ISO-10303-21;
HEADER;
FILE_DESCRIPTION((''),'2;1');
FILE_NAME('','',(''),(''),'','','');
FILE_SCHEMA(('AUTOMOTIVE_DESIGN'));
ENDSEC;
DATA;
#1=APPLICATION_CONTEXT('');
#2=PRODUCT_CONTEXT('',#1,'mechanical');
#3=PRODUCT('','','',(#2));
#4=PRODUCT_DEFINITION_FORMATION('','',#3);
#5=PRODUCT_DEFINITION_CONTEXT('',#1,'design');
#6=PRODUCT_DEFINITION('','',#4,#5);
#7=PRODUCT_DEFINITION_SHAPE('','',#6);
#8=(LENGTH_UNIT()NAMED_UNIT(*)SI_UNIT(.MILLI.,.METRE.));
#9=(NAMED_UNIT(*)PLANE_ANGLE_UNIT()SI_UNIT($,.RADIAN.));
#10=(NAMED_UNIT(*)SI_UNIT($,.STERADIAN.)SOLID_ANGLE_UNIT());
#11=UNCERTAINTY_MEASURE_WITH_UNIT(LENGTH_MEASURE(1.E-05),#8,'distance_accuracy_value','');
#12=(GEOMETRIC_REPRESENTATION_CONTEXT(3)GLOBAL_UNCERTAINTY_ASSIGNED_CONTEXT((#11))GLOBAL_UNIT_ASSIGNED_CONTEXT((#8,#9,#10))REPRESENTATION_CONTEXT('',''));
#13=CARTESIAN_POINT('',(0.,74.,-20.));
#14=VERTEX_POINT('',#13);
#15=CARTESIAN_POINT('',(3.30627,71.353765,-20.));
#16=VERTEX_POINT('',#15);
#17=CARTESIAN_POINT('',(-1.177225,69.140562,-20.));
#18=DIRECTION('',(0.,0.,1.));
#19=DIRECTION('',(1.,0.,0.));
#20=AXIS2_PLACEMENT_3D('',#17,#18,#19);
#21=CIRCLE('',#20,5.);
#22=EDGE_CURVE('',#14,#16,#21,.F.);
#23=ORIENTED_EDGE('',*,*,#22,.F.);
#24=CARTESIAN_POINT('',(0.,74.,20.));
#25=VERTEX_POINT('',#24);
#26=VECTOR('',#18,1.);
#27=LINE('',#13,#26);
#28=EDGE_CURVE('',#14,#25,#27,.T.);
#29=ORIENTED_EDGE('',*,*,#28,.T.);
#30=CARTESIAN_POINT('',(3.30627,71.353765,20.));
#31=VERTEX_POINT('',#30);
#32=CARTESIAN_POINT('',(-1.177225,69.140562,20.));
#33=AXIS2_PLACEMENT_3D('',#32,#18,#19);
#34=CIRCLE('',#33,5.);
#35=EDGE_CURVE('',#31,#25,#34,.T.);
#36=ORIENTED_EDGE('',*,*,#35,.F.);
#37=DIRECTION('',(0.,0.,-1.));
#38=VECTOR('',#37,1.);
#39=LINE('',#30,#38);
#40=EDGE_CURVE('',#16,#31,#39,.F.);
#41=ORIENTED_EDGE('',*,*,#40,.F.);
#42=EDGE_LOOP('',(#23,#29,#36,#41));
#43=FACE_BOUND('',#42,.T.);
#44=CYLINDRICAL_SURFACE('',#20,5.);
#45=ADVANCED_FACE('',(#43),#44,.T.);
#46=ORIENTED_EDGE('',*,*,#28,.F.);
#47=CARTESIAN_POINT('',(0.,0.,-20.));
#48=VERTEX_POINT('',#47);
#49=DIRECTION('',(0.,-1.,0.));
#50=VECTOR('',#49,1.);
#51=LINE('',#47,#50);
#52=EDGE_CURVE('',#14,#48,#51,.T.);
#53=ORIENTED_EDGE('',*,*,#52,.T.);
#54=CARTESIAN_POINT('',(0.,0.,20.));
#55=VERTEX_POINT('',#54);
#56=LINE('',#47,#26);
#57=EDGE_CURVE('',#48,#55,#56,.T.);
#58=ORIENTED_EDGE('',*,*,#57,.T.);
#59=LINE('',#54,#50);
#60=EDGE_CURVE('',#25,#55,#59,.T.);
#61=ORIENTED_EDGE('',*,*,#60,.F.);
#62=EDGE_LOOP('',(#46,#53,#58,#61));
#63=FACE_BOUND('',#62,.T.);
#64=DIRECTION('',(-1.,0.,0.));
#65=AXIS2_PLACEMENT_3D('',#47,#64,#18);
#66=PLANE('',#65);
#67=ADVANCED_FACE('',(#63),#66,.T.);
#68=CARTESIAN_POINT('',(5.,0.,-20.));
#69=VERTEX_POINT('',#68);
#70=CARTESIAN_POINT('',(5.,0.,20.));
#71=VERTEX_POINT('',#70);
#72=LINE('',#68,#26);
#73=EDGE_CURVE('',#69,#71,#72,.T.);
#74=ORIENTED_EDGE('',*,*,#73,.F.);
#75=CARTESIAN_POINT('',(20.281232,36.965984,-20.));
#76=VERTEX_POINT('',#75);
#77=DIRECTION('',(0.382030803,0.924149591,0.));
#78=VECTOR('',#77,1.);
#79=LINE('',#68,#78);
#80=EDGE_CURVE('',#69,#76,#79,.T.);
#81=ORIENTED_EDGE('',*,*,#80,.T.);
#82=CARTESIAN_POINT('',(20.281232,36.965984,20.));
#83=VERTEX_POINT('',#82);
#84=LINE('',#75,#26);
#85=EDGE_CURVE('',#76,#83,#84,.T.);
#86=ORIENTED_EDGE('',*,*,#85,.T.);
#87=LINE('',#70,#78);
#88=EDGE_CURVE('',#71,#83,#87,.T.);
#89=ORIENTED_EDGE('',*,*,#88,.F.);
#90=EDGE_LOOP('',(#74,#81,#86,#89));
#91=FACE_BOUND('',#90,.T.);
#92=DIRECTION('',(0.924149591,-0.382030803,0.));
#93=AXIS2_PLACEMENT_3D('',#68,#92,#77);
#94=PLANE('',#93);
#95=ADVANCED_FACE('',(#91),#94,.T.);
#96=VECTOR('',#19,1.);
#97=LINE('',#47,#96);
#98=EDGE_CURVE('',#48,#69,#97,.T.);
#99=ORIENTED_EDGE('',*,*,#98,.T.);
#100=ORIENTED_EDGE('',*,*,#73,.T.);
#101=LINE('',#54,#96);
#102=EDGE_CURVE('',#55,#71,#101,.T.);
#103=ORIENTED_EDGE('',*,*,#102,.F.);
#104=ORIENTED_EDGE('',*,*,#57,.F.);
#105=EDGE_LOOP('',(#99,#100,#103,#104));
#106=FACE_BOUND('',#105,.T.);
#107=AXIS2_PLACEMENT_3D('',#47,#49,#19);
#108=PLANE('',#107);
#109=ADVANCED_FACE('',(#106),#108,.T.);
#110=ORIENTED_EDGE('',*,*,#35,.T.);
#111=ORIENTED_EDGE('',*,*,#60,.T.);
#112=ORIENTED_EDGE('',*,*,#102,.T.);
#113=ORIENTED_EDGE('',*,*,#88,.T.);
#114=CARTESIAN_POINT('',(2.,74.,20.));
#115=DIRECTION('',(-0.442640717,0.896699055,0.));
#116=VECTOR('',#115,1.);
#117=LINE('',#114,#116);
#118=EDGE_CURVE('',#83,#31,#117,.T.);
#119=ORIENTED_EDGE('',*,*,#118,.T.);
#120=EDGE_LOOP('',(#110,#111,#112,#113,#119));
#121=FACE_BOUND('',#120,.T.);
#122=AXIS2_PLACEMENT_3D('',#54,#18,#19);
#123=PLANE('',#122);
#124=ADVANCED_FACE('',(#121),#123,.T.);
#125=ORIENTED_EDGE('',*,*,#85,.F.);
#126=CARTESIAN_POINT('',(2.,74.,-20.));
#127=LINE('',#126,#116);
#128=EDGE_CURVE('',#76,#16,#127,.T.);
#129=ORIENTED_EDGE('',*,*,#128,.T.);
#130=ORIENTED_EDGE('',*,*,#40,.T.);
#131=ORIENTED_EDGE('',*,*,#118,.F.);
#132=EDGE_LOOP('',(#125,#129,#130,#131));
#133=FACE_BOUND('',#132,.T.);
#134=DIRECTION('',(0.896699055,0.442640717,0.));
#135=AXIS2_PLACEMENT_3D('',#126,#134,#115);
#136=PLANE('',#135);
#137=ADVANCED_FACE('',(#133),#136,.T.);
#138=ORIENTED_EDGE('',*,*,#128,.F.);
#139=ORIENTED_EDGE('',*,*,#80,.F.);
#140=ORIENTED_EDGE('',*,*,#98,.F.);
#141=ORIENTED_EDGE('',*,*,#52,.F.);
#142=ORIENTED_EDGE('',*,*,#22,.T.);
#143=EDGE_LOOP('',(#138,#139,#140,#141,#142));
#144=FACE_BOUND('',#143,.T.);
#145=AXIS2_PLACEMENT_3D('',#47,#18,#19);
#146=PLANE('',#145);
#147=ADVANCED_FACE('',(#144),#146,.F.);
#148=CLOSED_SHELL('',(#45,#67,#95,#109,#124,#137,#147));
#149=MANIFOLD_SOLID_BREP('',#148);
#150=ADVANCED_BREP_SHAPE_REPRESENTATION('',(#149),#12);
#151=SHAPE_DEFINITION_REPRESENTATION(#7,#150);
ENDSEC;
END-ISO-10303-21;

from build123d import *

# Parameters (mm, degrees)
BOSS_EXTRUDE1_DEPTH = 20
FILLET3_R           = 5


with BuildPart() as part:
    # Sketch1 → Boss-Extrude1 (new, symmetric)
    with BuildSketch(Plane.XY):
        Polygon((0, 0), (0, 74), (2, 74), (20.281232104, 36.965983625), (5, 0), align=None)
    extrude(amount=BOSS_EXTRUDE1_DEPTH, both=True)

    # Fillet3
    # the kernel refuses this fillet: 5 mm, written as the material it takes off along each edge
    with BuildSketch(Plane(origin=(2, 74, 27.377711493), x_dir=(0.4426407168839213, -0.8966990552891692, 0), z_dir=(0, 0, -1))) as fillet3_piece_1:
        with BuildLine():
            CenterArc((2.951084597, 5), FILLET3_R, 219.89034736, 50.10965264)
            Line((-0.885281434, 1.793398111), (-0.962008754, 1.729266073))
            ThreePointArc((-0.962008754, 1.729266073), (-0.532310622, 0.852434984), (-0.089669906, -0.044264072))
            Line((-0.089669906, -0.044264072), (0, -0.1))
            Line((0, -0.1), (2.951084597, -0.1))
            Line((2.951084597, -0.1), (2.951084597, 0))
        make_face()
    extrude(amount=54.755422985, mode=Mode.SUBTRACT)


solid = part.part
